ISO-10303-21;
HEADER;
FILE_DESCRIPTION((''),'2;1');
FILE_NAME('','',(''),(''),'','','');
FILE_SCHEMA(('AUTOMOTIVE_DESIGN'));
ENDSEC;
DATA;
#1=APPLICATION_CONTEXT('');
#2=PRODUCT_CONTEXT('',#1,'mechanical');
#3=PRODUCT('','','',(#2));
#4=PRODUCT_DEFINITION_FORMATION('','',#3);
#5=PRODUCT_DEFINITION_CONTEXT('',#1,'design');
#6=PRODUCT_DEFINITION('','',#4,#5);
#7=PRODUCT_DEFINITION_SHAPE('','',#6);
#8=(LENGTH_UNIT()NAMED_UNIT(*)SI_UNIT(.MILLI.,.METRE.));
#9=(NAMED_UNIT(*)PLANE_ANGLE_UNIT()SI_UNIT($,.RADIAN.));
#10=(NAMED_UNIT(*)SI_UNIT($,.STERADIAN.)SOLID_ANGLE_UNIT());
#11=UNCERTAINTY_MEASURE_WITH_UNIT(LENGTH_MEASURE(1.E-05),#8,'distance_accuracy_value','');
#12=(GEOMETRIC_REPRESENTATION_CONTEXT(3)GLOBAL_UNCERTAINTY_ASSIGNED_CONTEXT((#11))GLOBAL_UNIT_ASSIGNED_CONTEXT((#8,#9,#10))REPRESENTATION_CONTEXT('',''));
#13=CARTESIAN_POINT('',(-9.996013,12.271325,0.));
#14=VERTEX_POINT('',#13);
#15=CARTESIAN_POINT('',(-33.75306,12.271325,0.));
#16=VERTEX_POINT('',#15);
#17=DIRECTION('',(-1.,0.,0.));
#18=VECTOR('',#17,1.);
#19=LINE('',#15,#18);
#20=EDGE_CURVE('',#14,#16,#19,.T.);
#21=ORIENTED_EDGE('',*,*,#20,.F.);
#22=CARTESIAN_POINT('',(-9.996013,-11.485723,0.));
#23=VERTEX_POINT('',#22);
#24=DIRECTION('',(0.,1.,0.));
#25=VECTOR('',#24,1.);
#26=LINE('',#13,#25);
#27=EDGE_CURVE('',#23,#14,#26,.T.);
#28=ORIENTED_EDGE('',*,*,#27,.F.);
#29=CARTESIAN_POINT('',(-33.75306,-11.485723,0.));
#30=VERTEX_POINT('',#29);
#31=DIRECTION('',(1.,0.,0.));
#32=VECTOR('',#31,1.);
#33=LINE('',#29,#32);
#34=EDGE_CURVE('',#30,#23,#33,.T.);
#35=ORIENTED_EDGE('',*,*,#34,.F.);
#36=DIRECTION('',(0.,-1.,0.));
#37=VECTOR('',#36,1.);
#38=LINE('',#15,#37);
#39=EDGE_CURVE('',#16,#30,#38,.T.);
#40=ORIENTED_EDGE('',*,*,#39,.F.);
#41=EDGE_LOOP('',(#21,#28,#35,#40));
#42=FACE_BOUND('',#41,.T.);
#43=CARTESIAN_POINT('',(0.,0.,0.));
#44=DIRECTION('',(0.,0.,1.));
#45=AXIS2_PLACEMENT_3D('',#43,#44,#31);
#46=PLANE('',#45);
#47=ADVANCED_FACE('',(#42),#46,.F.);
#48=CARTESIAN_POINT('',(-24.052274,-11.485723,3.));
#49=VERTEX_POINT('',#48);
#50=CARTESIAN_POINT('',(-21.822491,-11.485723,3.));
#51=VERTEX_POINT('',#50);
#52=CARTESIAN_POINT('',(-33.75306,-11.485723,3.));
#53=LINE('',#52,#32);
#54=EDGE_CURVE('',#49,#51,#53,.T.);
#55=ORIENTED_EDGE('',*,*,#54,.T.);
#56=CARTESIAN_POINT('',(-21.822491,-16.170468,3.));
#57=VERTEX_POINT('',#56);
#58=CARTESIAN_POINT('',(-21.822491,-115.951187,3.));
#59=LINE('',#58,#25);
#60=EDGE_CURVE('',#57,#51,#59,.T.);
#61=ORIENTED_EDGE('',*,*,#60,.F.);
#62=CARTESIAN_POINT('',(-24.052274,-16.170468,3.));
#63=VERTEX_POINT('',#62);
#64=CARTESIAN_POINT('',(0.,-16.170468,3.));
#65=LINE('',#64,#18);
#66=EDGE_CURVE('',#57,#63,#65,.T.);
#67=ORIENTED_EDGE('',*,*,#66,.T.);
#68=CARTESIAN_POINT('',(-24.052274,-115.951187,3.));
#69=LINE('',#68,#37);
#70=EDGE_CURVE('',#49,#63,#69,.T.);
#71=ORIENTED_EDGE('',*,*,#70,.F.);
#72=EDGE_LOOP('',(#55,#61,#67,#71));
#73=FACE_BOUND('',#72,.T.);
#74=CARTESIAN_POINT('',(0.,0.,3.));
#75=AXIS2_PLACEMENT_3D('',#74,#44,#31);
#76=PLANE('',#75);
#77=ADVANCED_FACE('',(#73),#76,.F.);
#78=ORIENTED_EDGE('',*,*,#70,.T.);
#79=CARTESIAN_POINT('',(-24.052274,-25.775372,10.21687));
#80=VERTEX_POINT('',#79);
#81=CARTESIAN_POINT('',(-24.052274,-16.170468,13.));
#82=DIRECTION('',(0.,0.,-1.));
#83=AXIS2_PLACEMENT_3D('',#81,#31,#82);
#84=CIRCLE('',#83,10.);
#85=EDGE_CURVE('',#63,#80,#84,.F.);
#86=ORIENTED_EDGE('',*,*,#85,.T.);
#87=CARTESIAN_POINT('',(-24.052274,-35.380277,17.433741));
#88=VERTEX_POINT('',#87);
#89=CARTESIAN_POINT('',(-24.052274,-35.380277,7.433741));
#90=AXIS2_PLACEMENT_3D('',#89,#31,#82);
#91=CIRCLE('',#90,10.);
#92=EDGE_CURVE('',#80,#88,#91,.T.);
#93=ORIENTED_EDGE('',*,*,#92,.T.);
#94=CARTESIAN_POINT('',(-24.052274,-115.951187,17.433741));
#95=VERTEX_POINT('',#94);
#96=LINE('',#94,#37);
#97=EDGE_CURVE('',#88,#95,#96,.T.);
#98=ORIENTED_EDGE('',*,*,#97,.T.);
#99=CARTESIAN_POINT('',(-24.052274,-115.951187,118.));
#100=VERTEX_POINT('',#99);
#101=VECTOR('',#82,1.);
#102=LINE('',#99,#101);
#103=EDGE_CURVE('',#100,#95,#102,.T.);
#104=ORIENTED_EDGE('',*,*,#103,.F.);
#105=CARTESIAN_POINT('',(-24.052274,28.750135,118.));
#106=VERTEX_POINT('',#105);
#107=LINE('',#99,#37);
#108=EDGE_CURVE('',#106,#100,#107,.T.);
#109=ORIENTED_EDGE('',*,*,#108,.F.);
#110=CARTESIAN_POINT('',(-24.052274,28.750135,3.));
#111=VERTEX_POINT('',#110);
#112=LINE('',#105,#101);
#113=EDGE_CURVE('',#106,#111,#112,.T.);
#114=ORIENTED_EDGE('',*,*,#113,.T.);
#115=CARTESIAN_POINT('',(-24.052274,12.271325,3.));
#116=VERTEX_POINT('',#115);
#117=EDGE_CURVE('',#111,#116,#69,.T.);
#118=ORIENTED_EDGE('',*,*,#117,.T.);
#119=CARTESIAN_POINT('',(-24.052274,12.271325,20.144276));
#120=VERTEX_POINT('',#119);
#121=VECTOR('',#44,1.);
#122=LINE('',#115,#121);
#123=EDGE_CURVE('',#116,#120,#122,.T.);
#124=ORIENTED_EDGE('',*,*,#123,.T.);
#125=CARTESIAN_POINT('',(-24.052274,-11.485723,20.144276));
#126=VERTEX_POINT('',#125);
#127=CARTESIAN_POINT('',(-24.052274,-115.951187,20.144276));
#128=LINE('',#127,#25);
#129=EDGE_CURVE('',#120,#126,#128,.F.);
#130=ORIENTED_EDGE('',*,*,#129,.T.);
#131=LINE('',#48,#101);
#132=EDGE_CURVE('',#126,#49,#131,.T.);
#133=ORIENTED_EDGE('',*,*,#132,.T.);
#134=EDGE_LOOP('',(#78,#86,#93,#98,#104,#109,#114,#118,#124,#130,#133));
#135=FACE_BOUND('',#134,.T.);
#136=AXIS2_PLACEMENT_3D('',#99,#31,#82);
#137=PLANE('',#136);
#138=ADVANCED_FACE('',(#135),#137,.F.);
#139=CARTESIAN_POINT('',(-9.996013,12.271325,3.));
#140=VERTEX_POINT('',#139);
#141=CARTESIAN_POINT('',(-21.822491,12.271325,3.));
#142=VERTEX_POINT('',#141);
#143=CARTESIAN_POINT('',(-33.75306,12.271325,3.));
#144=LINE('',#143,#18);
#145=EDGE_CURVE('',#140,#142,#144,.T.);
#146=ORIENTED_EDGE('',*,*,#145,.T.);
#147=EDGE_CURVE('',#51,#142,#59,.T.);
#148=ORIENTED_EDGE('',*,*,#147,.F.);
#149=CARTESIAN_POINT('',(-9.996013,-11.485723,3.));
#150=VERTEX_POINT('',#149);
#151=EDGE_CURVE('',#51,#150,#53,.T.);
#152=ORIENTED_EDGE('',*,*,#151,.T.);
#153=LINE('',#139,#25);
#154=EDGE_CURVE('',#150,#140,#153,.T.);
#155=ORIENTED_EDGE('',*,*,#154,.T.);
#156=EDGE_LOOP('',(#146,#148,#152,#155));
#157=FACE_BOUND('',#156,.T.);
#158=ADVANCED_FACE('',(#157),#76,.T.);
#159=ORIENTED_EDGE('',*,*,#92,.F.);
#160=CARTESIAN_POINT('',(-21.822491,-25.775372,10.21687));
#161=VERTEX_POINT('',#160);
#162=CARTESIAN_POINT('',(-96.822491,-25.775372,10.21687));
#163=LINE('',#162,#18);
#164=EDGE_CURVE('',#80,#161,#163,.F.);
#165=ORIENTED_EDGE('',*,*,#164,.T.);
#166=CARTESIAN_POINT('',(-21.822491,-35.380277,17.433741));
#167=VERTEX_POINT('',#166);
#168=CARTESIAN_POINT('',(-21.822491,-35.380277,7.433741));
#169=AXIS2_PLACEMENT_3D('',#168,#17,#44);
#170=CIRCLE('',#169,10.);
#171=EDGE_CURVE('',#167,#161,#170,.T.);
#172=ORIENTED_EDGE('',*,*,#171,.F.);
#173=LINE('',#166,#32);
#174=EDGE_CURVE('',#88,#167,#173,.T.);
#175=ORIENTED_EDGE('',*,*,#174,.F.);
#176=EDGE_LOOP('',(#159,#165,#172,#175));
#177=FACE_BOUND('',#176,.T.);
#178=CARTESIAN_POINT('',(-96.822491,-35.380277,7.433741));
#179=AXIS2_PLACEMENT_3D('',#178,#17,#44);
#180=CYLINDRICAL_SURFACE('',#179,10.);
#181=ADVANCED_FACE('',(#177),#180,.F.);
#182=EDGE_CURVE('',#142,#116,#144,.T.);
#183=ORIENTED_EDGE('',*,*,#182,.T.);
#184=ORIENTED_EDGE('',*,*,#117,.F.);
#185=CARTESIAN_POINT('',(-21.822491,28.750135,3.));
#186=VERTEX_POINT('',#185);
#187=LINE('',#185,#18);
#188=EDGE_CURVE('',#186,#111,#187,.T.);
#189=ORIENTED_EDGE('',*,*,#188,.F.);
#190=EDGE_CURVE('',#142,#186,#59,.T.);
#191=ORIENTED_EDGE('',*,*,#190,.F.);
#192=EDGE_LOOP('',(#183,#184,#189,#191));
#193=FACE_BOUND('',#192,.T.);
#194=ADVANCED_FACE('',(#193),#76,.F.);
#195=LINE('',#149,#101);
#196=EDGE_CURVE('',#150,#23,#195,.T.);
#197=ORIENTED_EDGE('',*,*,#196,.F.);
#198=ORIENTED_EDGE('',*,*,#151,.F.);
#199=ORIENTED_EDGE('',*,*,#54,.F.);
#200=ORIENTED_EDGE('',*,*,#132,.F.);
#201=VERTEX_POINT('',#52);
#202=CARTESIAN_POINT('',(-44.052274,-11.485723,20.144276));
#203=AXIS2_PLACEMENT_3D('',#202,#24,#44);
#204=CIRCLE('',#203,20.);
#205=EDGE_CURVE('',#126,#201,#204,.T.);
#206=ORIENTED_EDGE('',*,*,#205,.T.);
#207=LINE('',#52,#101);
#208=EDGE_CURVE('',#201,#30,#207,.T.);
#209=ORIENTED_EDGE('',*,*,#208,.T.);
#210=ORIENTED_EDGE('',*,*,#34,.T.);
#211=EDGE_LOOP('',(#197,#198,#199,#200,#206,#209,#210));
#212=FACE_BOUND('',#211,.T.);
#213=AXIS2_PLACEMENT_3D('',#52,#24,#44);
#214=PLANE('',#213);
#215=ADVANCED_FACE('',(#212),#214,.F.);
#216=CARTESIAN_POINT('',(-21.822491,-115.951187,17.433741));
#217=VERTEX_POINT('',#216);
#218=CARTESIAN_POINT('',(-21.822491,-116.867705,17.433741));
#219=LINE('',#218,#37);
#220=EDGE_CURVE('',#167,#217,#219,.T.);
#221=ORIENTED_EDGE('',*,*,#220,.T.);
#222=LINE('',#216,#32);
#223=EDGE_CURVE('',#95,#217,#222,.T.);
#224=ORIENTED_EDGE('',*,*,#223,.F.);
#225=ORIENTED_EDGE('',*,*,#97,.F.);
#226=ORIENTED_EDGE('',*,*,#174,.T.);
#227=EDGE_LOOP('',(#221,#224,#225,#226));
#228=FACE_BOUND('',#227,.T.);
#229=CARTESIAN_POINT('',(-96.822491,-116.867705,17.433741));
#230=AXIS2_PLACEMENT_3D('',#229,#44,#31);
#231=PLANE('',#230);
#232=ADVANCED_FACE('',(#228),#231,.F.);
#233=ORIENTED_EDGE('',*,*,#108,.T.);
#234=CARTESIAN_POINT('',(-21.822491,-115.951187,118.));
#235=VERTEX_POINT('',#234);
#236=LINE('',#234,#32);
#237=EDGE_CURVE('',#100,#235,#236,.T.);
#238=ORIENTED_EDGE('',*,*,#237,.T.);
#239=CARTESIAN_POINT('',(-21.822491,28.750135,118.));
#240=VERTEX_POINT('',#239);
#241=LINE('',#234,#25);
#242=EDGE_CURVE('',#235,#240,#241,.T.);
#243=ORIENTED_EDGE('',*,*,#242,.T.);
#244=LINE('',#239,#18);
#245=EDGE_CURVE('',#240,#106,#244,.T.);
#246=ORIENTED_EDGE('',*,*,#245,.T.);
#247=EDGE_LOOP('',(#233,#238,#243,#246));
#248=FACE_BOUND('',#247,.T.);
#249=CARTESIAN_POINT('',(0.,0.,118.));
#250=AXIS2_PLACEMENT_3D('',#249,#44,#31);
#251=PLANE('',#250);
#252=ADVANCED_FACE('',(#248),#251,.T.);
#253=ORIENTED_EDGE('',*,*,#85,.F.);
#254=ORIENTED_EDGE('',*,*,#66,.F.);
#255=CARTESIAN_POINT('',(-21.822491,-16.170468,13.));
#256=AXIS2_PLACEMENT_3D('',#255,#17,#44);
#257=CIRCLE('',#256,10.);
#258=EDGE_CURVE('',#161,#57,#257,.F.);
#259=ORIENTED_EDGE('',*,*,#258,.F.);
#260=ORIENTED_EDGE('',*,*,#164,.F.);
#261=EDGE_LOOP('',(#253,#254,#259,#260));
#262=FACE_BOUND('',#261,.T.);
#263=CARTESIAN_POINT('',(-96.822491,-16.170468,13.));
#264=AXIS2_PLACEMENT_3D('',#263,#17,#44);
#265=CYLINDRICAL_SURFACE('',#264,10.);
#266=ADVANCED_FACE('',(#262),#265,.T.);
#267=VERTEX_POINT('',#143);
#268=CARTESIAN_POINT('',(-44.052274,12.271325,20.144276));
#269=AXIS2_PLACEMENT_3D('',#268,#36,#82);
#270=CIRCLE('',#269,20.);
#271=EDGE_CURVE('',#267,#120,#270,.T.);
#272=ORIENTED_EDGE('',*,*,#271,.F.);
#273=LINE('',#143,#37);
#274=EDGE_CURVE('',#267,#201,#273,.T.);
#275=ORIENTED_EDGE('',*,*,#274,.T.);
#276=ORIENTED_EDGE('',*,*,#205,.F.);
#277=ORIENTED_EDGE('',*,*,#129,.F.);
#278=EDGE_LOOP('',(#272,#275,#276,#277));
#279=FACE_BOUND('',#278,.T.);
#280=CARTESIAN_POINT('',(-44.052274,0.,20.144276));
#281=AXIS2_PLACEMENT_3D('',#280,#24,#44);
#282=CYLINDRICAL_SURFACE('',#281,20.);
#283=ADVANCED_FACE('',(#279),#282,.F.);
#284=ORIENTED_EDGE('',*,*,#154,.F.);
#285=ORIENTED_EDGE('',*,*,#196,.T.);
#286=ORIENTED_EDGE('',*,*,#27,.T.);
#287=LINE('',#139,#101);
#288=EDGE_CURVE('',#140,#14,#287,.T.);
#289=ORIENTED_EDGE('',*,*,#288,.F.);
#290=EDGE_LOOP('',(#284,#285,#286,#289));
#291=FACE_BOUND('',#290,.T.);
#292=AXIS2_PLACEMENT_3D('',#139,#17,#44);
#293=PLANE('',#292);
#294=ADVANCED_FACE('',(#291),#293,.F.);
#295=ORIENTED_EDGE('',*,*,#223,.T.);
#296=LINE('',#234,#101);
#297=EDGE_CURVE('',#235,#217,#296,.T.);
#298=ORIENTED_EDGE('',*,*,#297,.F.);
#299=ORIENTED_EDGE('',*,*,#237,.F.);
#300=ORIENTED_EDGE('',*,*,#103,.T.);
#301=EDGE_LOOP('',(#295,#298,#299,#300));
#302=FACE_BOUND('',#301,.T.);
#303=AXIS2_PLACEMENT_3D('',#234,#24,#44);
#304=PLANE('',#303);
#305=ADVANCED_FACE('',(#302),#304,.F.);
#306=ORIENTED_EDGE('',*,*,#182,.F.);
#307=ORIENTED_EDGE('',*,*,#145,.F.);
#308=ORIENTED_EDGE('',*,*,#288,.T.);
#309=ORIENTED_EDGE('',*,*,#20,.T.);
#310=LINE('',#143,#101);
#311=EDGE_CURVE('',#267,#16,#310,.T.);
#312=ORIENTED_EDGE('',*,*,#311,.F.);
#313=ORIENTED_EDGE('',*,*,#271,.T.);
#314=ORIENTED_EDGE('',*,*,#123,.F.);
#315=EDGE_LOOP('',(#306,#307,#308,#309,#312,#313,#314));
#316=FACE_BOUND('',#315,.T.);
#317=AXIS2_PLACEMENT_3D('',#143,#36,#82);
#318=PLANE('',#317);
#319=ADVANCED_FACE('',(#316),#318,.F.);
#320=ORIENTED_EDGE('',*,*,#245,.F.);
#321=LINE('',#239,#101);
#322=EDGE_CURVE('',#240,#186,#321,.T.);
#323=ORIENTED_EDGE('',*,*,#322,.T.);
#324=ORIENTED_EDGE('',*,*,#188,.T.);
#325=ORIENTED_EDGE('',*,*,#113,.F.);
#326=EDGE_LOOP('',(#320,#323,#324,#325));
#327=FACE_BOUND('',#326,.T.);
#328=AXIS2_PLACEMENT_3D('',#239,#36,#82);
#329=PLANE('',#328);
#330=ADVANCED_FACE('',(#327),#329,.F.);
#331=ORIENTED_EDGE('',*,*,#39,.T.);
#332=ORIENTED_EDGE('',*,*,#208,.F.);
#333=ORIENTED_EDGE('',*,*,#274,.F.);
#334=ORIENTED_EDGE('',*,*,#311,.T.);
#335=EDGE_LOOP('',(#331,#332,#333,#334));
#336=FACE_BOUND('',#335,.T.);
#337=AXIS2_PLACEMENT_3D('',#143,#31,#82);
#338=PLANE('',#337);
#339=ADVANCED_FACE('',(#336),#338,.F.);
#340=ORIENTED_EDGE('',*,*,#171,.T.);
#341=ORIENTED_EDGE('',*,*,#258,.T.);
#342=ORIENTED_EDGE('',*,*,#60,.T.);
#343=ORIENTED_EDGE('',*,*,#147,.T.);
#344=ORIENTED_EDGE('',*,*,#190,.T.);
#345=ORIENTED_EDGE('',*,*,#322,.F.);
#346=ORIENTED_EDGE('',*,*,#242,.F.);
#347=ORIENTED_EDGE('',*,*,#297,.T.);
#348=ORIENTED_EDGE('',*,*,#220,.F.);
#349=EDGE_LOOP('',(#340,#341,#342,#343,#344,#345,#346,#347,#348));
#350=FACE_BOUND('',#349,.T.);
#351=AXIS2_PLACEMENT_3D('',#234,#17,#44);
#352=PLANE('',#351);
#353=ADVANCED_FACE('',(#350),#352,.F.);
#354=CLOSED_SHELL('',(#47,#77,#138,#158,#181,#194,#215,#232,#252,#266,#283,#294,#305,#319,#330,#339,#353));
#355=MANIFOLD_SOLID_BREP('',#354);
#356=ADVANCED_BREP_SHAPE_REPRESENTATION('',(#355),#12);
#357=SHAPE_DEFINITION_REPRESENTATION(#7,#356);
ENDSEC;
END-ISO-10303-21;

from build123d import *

# Parameters (mm, degrees)
SKETCH_1_W          = 23.757047591
SKETCH_1_H          = 23.75704759
EXTRUDE_1_DEPTH     = 3
SKETCH_2_W          = 2.229782935
SKETCH_2_H          = 144.701322111
EXTRUDE_2_DEPTH     = 115
FILLET_1_R          = 20
SKETCH_3_W          = 17.433740909
SKETCH_3_H          = 91.487428691
CUT_EXTRUDE_1_DEPTH = 75
FILLET_2_R          = 10
FILLET_3_R          = 10


with BuildPart() as part:
    # 草图1 → 凸台-拉伸1 (new body)
    with BuildSketch(Plane.XY):
        with Locations((-21.874536556, 0.392800792)):
            Rectangle(SKETCH_1_W, SKETCH_1_H)
    extrude(amount=EXTRUDE_1_DEPTH)

    # 草图2 → 凸台-拉伸2 (add)
    with BuildSketch(Plane.XY.offset(3)):
        with Locations((-22.937382742, -43.600525925)):
            Rectangle(SKETCH_2_W, SKETCH_2_H)
    extrude(amount=EXTRUDE_2_DEPTH)

    # 圆角1
    # the kernel refuses this fillet: 20 mm, written as the material it adds along each edge
    with BuildSketch(Plane(origin=(-24.052274209, -11.485723003, 3), x_dir=(-1, 0, 0), z_dir=(0, 1, 0))) as fillet_1_piece_1:
        with BuildLine():
            CenterArc((20, 17.144275835), FILLET_1_R, 180, 59.005172318)
            Line((0, 17.144275835), (0, 0))
            Line((0, 0), (9.700786142, 0))
        make_face()
    extrude(amount=23.75704759)

    # 草图3 → 切除-拉伸1 (cut)
    with BuildSketch(Plane(origin=(-21.822491274, 0, 0), x_dir=(0, 0, -1), z_dir=(1, 0, 0))):
        with Locations((-8.716870455, -71.123991133)):
            Rectangle(SKETCH_3_W, SKETCH_3_H)
    extrude(amount=-CUT_EXTRUDE_1_DEPTH, mode=Mode.SUBTRACT)

    # 圆角2
    fillet_2_edges = [part.edges().sort_by_distance(p)[0] for p in [
        (-22.937382741, -25.380276788, 17.433740909),
    ]]
    fillet(fillet_2_edges, radius=FILLET_2_R)

    # 圆角3
    fillet_3_edges = [part.edges().sort_by_distance(p)[0] for p in [
        (-22.937382741, -25.380276788, 3),
    ]]
    fillet(fillet_3_edges, radius=FILLET_3_R)


solid = part.part
